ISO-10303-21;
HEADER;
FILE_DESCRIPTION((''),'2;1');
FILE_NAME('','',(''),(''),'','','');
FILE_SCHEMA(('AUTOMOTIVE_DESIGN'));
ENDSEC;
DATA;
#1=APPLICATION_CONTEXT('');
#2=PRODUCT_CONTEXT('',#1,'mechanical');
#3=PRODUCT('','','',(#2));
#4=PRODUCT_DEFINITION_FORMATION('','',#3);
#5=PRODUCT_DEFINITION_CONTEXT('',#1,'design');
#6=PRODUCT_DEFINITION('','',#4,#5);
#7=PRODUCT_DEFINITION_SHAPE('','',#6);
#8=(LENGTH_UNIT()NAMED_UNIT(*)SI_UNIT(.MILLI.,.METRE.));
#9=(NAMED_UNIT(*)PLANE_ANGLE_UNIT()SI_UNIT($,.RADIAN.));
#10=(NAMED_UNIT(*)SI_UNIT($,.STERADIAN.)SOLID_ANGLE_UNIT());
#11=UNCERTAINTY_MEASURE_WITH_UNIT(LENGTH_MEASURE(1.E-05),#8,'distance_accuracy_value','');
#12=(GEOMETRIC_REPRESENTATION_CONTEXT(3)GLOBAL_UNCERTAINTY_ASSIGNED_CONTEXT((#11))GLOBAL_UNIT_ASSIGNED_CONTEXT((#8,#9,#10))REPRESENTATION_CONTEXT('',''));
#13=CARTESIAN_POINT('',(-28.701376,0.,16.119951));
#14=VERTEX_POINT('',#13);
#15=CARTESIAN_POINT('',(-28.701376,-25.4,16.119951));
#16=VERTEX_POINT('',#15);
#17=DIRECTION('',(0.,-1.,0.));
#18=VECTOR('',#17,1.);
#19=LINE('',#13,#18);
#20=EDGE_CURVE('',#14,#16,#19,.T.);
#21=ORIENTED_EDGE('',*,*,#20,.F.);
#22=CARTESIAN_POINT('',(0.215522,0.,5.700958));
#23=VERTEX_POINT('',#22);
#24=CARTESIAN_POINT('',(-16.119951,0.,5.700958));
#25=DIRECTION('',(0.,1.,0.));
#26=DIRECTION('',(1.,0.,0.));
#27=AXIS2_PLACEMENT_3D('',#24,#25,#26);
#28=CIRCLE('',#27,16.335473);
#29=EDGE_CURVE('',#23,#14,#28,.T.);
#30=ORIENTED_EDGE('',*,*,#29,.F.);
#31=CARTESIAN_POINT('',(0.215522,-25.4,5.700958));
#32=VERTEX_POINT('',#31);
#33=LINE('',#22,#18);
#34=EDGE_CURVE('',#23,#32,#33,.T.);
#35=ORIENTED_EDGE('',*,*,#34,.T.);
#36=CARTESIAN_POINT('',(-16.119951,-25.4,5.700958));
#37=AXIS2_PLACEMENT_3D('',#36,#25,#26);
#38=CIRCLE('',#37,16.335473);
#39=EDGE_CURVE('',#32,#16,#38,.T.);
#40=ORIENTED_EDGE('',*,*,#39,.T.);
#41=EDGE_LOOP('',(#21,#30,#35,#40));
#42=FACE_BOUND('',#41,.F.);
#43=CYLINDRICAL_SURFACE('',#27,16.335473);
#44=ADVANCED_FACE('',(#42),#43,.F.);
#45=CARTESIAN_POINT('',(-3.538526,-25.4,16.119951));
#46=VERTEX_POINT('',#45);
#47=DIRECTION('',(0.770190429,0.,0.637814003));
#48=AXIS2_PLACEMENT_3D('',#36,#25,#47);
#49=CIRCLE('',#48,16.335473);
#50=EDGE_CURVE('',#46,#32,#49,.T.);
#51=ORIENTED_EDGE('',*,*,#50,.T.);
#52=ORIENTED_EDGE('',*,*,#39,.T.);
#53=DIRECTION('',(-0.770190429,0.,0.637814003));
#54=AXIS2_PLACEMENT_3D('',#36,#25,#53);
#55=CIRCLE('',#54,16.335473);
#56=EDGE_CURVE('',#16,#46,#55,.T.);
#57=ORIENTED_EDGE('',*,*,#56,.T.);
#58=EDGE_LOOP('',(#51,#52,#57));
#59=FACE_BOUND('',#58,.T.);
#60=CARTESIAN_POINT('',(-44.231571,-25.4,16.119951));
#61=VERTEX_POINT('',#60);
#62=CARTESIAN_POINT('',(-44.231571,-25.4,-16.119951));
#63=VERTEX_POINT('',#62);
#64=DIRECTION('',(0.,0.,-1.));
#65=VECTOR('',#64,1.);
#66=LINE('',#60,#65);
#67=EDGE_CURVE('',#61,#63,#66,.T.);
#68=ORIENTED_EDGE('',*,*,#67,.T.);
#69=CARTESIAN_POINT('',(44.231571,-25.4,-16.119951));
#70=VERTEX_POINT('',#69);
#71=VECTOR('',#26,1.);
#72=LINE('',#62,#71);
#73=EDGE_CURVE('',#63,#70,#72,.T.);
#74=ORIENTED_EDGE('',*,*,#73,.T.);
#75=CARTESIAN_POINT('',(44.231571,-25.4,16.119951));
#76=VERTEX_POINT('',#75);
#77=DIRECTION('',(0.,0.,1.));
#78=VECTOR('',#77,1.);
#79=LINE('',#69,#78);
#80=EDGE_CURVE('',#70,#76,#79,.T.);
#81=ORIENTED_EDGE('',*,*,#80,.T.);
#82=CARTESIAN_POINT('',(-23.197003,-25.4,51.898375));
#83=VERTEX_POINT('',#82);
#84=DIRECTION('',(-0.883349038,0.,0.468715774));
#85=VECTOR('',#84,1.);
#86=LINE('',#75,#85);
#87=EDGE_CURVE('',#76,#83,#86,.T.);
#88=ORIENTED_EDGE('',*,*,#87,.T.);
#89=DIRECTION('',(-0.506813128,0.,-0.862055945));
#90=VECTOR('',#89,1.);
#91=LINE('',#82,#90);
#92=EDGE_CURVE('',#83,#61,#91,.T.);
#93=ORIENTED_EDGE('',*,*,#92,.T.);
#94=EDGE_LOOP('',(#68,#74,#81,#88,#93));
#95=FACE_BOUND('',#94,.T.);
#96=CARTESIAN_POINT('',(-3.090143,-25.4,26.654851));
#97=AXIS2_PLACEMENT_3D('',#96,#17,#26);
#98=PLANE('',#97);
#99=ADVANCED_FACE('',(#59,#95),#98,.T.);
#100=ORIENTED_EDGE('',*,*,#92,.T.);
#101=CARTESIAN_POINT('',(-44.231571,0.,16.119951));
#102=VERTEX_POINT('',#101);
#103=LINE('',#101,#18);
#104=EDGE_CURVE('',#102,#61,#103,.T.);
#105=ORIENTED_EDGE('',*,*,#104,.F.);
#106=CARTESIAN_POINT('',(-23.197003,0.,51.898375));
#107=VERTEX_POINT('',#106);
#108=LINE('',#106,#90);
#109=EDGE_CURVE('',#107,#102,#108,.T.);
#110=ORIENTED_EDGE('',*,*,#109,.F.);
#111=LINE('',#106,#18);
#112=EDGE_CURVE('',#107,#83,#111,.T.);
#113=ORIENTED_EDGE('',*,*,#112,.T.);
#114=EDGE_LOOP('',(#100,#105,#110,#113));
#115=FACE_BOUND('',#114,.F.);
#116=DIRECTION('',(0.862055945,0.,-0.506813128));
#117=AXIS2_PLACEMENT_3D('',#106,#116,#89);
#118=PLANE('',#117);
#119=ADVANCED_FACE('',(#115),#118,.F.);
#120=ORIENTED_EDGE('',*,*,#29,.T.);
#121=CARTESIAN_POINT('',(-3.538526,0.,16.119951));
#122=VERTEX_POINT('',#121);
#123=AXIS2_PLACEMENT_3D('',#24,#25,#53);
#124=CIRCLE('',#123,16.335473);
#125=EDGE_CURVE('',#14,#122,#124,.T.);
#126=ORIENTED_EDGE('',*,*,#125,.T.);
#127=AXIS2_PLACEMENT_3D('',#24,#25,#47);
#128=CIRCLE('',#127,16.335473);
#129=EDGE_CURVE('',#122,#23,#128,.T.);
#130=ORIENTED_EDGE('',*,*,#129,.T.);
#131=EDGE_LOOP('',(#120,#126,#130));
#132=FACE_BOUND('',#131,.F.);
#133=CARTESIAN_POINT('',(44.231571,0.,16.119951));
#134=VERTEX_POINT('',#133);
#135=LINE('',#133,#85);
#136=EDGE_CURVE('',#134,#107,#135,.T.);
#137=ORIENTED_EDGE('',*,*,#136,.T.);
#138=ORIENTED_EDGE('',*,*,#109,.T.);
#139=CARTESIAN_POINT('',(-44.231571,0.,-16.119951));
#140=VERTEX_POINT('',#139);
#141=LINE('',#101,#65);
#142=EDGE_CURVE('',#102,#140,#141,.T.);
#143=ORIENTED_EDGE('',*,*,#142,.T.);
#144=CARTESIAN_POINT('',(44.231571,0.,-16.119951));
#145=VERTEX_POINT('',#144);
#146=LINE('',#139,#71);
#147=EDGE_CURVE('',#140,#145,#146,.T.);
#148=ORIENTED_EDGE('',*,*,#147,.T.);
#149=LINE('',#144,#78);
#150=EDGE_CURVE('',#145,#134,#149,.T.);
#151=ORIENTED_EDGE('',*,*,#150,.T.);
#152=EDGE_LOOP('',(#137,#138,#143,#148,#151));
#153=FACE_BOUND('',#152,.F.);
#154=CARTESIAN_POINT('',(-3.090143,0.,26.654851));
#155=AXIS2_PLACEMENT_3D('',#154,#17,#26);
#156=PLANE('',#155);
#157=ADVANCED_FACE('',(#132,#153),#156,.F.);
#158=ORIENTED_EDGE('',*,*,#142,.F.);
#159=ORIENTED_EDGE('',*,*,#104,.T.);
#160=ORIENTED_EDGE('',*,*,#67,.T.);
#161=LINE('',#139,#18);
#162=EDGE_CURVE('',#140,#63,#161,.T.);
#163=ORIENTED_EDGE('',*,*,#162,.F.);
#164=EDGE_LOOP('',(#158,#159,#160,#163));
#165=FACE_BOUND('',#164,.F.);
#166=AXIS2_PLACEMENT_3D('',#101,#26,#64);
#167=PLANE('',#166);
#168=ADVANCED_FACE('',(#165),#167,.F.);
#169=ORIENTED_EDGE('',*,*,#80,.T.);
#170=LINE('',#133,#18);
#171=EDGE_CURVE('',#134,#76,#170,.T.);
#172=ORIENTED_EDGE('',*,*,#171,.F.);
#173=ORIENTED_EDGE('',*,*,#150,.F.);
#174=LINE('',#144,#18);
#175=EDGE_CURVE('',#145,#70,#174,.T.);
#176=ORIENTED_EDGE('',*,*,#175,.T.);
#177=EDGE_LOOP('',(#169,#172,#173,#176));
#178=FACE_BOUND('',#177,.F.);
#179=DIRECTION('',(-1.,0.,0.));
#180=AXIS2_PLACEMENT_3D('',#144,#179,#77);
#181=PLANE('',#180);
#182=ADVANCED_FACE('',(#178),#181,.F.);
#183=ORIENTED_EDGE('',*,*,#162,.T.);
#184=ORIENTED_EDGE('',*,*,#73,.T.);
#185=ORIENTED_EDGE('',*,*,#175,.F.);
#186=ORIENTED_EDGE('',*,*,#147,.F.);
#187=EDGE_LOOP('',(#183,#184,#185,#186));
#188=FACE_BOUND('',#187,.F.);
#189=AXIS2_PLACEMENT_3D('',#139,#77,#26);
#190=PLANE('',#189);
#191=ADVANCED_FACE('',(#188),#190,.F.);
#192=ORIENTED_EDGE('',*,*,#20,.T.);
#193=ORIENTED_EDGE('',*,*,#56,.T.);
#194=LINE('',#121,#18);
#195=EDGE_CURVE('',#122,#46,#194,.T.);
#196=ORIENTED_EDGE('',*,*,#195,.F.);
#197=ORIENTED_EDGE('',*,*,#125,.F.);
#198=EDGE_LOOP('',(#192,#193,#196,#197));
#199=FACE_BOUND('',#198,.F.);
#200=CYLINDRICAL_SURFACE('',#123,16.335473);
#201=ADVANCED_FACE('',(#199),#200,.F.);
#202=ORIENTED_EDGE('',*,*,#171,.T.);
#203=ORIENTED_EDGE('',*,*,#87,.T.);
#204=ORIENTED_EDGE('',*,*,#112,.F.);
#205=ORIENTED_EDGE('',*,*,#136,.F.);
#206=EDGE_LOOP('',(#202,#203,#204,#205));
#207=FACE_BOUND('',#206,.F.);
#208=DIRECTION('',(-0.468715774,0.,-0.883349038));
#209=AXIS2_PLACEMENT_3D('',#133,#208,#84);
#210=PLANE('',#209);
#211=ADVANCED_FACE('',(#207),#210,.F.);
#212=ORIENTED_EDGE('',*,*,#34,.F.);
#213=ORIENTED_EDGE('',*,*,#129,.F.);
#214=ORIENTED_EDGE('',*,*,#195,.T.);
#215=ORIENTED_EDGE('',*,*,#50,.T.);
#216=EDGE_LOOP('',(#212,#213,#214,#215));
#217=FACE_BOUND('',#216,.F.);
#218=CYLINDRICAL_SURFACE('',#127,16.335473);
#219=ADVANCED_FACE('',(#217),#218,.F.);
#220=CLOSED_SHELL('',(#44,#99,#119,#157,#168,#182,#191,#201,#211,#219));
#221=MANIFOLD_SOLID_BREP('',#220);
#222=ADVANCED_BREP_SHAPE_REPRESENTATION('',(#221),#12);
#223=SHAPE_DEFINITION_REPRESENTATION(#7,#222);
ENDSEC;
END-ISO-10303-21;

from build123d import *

# Parameters (mm, degrees)
F1_DEPTH = 25.4


# Not quite as in the source:
# - a feature names something its author has since deleted; it is built from what else it names


with BuildPart() as f1:
    # F0 (on Front) → F1 (new body)
    with BuildSketch(Plane.XZ):
        with BuildLine():
            Line((-23.1970027089, 51.8983751535), (-44.2315712571, 16.1199513823))
            Line((-44.2315712571, 16.1199513823), (-28.70137633, 16.1199513823))
            ThreePointArc((-28.70137633, 16.1199513823), (-16.1199513823, 22.0364309456), (-3.5385264346, 16.1199513823))
            Line((-3.5385264346, 16.1199513823), (44.2315712571, 16.1199513823))
            Line((44.2315712571, 16.1199513823), (-23.1970027089, 51.8983751535))
        make_face()
        with BuildLine():
            Line((-28.70137633, 16.1199513823), (-44.2315712571, 16.1199513823))
            Line((-44.2315712571, 16.1199513823), (-44.2315712571, -16.1199513823))
            Line((-44.2315712571, -16.1199513823), (44.2315712571, -16.1199513823))
            Line((44.2315712571, -16.1199513823), (44.2315712571, 16.1199513823))
            Line((44.2315712571, 16.1199513823), (-3.5385264346, 16.1199513823))
            ThreePointArc((-3.5385264346, 16.1199513823), (-0.7516202277, 11.2382926218), (0.215521602, 5.7009579614))
            ThreePointArc((0.215521602, 5.7009579614), (-21.6572860427, -9.6673731932), (-28.70137633, 16.1199513823))
        make_face()
    extrude(amount=F1_DEPTH)


solid = f1.part
